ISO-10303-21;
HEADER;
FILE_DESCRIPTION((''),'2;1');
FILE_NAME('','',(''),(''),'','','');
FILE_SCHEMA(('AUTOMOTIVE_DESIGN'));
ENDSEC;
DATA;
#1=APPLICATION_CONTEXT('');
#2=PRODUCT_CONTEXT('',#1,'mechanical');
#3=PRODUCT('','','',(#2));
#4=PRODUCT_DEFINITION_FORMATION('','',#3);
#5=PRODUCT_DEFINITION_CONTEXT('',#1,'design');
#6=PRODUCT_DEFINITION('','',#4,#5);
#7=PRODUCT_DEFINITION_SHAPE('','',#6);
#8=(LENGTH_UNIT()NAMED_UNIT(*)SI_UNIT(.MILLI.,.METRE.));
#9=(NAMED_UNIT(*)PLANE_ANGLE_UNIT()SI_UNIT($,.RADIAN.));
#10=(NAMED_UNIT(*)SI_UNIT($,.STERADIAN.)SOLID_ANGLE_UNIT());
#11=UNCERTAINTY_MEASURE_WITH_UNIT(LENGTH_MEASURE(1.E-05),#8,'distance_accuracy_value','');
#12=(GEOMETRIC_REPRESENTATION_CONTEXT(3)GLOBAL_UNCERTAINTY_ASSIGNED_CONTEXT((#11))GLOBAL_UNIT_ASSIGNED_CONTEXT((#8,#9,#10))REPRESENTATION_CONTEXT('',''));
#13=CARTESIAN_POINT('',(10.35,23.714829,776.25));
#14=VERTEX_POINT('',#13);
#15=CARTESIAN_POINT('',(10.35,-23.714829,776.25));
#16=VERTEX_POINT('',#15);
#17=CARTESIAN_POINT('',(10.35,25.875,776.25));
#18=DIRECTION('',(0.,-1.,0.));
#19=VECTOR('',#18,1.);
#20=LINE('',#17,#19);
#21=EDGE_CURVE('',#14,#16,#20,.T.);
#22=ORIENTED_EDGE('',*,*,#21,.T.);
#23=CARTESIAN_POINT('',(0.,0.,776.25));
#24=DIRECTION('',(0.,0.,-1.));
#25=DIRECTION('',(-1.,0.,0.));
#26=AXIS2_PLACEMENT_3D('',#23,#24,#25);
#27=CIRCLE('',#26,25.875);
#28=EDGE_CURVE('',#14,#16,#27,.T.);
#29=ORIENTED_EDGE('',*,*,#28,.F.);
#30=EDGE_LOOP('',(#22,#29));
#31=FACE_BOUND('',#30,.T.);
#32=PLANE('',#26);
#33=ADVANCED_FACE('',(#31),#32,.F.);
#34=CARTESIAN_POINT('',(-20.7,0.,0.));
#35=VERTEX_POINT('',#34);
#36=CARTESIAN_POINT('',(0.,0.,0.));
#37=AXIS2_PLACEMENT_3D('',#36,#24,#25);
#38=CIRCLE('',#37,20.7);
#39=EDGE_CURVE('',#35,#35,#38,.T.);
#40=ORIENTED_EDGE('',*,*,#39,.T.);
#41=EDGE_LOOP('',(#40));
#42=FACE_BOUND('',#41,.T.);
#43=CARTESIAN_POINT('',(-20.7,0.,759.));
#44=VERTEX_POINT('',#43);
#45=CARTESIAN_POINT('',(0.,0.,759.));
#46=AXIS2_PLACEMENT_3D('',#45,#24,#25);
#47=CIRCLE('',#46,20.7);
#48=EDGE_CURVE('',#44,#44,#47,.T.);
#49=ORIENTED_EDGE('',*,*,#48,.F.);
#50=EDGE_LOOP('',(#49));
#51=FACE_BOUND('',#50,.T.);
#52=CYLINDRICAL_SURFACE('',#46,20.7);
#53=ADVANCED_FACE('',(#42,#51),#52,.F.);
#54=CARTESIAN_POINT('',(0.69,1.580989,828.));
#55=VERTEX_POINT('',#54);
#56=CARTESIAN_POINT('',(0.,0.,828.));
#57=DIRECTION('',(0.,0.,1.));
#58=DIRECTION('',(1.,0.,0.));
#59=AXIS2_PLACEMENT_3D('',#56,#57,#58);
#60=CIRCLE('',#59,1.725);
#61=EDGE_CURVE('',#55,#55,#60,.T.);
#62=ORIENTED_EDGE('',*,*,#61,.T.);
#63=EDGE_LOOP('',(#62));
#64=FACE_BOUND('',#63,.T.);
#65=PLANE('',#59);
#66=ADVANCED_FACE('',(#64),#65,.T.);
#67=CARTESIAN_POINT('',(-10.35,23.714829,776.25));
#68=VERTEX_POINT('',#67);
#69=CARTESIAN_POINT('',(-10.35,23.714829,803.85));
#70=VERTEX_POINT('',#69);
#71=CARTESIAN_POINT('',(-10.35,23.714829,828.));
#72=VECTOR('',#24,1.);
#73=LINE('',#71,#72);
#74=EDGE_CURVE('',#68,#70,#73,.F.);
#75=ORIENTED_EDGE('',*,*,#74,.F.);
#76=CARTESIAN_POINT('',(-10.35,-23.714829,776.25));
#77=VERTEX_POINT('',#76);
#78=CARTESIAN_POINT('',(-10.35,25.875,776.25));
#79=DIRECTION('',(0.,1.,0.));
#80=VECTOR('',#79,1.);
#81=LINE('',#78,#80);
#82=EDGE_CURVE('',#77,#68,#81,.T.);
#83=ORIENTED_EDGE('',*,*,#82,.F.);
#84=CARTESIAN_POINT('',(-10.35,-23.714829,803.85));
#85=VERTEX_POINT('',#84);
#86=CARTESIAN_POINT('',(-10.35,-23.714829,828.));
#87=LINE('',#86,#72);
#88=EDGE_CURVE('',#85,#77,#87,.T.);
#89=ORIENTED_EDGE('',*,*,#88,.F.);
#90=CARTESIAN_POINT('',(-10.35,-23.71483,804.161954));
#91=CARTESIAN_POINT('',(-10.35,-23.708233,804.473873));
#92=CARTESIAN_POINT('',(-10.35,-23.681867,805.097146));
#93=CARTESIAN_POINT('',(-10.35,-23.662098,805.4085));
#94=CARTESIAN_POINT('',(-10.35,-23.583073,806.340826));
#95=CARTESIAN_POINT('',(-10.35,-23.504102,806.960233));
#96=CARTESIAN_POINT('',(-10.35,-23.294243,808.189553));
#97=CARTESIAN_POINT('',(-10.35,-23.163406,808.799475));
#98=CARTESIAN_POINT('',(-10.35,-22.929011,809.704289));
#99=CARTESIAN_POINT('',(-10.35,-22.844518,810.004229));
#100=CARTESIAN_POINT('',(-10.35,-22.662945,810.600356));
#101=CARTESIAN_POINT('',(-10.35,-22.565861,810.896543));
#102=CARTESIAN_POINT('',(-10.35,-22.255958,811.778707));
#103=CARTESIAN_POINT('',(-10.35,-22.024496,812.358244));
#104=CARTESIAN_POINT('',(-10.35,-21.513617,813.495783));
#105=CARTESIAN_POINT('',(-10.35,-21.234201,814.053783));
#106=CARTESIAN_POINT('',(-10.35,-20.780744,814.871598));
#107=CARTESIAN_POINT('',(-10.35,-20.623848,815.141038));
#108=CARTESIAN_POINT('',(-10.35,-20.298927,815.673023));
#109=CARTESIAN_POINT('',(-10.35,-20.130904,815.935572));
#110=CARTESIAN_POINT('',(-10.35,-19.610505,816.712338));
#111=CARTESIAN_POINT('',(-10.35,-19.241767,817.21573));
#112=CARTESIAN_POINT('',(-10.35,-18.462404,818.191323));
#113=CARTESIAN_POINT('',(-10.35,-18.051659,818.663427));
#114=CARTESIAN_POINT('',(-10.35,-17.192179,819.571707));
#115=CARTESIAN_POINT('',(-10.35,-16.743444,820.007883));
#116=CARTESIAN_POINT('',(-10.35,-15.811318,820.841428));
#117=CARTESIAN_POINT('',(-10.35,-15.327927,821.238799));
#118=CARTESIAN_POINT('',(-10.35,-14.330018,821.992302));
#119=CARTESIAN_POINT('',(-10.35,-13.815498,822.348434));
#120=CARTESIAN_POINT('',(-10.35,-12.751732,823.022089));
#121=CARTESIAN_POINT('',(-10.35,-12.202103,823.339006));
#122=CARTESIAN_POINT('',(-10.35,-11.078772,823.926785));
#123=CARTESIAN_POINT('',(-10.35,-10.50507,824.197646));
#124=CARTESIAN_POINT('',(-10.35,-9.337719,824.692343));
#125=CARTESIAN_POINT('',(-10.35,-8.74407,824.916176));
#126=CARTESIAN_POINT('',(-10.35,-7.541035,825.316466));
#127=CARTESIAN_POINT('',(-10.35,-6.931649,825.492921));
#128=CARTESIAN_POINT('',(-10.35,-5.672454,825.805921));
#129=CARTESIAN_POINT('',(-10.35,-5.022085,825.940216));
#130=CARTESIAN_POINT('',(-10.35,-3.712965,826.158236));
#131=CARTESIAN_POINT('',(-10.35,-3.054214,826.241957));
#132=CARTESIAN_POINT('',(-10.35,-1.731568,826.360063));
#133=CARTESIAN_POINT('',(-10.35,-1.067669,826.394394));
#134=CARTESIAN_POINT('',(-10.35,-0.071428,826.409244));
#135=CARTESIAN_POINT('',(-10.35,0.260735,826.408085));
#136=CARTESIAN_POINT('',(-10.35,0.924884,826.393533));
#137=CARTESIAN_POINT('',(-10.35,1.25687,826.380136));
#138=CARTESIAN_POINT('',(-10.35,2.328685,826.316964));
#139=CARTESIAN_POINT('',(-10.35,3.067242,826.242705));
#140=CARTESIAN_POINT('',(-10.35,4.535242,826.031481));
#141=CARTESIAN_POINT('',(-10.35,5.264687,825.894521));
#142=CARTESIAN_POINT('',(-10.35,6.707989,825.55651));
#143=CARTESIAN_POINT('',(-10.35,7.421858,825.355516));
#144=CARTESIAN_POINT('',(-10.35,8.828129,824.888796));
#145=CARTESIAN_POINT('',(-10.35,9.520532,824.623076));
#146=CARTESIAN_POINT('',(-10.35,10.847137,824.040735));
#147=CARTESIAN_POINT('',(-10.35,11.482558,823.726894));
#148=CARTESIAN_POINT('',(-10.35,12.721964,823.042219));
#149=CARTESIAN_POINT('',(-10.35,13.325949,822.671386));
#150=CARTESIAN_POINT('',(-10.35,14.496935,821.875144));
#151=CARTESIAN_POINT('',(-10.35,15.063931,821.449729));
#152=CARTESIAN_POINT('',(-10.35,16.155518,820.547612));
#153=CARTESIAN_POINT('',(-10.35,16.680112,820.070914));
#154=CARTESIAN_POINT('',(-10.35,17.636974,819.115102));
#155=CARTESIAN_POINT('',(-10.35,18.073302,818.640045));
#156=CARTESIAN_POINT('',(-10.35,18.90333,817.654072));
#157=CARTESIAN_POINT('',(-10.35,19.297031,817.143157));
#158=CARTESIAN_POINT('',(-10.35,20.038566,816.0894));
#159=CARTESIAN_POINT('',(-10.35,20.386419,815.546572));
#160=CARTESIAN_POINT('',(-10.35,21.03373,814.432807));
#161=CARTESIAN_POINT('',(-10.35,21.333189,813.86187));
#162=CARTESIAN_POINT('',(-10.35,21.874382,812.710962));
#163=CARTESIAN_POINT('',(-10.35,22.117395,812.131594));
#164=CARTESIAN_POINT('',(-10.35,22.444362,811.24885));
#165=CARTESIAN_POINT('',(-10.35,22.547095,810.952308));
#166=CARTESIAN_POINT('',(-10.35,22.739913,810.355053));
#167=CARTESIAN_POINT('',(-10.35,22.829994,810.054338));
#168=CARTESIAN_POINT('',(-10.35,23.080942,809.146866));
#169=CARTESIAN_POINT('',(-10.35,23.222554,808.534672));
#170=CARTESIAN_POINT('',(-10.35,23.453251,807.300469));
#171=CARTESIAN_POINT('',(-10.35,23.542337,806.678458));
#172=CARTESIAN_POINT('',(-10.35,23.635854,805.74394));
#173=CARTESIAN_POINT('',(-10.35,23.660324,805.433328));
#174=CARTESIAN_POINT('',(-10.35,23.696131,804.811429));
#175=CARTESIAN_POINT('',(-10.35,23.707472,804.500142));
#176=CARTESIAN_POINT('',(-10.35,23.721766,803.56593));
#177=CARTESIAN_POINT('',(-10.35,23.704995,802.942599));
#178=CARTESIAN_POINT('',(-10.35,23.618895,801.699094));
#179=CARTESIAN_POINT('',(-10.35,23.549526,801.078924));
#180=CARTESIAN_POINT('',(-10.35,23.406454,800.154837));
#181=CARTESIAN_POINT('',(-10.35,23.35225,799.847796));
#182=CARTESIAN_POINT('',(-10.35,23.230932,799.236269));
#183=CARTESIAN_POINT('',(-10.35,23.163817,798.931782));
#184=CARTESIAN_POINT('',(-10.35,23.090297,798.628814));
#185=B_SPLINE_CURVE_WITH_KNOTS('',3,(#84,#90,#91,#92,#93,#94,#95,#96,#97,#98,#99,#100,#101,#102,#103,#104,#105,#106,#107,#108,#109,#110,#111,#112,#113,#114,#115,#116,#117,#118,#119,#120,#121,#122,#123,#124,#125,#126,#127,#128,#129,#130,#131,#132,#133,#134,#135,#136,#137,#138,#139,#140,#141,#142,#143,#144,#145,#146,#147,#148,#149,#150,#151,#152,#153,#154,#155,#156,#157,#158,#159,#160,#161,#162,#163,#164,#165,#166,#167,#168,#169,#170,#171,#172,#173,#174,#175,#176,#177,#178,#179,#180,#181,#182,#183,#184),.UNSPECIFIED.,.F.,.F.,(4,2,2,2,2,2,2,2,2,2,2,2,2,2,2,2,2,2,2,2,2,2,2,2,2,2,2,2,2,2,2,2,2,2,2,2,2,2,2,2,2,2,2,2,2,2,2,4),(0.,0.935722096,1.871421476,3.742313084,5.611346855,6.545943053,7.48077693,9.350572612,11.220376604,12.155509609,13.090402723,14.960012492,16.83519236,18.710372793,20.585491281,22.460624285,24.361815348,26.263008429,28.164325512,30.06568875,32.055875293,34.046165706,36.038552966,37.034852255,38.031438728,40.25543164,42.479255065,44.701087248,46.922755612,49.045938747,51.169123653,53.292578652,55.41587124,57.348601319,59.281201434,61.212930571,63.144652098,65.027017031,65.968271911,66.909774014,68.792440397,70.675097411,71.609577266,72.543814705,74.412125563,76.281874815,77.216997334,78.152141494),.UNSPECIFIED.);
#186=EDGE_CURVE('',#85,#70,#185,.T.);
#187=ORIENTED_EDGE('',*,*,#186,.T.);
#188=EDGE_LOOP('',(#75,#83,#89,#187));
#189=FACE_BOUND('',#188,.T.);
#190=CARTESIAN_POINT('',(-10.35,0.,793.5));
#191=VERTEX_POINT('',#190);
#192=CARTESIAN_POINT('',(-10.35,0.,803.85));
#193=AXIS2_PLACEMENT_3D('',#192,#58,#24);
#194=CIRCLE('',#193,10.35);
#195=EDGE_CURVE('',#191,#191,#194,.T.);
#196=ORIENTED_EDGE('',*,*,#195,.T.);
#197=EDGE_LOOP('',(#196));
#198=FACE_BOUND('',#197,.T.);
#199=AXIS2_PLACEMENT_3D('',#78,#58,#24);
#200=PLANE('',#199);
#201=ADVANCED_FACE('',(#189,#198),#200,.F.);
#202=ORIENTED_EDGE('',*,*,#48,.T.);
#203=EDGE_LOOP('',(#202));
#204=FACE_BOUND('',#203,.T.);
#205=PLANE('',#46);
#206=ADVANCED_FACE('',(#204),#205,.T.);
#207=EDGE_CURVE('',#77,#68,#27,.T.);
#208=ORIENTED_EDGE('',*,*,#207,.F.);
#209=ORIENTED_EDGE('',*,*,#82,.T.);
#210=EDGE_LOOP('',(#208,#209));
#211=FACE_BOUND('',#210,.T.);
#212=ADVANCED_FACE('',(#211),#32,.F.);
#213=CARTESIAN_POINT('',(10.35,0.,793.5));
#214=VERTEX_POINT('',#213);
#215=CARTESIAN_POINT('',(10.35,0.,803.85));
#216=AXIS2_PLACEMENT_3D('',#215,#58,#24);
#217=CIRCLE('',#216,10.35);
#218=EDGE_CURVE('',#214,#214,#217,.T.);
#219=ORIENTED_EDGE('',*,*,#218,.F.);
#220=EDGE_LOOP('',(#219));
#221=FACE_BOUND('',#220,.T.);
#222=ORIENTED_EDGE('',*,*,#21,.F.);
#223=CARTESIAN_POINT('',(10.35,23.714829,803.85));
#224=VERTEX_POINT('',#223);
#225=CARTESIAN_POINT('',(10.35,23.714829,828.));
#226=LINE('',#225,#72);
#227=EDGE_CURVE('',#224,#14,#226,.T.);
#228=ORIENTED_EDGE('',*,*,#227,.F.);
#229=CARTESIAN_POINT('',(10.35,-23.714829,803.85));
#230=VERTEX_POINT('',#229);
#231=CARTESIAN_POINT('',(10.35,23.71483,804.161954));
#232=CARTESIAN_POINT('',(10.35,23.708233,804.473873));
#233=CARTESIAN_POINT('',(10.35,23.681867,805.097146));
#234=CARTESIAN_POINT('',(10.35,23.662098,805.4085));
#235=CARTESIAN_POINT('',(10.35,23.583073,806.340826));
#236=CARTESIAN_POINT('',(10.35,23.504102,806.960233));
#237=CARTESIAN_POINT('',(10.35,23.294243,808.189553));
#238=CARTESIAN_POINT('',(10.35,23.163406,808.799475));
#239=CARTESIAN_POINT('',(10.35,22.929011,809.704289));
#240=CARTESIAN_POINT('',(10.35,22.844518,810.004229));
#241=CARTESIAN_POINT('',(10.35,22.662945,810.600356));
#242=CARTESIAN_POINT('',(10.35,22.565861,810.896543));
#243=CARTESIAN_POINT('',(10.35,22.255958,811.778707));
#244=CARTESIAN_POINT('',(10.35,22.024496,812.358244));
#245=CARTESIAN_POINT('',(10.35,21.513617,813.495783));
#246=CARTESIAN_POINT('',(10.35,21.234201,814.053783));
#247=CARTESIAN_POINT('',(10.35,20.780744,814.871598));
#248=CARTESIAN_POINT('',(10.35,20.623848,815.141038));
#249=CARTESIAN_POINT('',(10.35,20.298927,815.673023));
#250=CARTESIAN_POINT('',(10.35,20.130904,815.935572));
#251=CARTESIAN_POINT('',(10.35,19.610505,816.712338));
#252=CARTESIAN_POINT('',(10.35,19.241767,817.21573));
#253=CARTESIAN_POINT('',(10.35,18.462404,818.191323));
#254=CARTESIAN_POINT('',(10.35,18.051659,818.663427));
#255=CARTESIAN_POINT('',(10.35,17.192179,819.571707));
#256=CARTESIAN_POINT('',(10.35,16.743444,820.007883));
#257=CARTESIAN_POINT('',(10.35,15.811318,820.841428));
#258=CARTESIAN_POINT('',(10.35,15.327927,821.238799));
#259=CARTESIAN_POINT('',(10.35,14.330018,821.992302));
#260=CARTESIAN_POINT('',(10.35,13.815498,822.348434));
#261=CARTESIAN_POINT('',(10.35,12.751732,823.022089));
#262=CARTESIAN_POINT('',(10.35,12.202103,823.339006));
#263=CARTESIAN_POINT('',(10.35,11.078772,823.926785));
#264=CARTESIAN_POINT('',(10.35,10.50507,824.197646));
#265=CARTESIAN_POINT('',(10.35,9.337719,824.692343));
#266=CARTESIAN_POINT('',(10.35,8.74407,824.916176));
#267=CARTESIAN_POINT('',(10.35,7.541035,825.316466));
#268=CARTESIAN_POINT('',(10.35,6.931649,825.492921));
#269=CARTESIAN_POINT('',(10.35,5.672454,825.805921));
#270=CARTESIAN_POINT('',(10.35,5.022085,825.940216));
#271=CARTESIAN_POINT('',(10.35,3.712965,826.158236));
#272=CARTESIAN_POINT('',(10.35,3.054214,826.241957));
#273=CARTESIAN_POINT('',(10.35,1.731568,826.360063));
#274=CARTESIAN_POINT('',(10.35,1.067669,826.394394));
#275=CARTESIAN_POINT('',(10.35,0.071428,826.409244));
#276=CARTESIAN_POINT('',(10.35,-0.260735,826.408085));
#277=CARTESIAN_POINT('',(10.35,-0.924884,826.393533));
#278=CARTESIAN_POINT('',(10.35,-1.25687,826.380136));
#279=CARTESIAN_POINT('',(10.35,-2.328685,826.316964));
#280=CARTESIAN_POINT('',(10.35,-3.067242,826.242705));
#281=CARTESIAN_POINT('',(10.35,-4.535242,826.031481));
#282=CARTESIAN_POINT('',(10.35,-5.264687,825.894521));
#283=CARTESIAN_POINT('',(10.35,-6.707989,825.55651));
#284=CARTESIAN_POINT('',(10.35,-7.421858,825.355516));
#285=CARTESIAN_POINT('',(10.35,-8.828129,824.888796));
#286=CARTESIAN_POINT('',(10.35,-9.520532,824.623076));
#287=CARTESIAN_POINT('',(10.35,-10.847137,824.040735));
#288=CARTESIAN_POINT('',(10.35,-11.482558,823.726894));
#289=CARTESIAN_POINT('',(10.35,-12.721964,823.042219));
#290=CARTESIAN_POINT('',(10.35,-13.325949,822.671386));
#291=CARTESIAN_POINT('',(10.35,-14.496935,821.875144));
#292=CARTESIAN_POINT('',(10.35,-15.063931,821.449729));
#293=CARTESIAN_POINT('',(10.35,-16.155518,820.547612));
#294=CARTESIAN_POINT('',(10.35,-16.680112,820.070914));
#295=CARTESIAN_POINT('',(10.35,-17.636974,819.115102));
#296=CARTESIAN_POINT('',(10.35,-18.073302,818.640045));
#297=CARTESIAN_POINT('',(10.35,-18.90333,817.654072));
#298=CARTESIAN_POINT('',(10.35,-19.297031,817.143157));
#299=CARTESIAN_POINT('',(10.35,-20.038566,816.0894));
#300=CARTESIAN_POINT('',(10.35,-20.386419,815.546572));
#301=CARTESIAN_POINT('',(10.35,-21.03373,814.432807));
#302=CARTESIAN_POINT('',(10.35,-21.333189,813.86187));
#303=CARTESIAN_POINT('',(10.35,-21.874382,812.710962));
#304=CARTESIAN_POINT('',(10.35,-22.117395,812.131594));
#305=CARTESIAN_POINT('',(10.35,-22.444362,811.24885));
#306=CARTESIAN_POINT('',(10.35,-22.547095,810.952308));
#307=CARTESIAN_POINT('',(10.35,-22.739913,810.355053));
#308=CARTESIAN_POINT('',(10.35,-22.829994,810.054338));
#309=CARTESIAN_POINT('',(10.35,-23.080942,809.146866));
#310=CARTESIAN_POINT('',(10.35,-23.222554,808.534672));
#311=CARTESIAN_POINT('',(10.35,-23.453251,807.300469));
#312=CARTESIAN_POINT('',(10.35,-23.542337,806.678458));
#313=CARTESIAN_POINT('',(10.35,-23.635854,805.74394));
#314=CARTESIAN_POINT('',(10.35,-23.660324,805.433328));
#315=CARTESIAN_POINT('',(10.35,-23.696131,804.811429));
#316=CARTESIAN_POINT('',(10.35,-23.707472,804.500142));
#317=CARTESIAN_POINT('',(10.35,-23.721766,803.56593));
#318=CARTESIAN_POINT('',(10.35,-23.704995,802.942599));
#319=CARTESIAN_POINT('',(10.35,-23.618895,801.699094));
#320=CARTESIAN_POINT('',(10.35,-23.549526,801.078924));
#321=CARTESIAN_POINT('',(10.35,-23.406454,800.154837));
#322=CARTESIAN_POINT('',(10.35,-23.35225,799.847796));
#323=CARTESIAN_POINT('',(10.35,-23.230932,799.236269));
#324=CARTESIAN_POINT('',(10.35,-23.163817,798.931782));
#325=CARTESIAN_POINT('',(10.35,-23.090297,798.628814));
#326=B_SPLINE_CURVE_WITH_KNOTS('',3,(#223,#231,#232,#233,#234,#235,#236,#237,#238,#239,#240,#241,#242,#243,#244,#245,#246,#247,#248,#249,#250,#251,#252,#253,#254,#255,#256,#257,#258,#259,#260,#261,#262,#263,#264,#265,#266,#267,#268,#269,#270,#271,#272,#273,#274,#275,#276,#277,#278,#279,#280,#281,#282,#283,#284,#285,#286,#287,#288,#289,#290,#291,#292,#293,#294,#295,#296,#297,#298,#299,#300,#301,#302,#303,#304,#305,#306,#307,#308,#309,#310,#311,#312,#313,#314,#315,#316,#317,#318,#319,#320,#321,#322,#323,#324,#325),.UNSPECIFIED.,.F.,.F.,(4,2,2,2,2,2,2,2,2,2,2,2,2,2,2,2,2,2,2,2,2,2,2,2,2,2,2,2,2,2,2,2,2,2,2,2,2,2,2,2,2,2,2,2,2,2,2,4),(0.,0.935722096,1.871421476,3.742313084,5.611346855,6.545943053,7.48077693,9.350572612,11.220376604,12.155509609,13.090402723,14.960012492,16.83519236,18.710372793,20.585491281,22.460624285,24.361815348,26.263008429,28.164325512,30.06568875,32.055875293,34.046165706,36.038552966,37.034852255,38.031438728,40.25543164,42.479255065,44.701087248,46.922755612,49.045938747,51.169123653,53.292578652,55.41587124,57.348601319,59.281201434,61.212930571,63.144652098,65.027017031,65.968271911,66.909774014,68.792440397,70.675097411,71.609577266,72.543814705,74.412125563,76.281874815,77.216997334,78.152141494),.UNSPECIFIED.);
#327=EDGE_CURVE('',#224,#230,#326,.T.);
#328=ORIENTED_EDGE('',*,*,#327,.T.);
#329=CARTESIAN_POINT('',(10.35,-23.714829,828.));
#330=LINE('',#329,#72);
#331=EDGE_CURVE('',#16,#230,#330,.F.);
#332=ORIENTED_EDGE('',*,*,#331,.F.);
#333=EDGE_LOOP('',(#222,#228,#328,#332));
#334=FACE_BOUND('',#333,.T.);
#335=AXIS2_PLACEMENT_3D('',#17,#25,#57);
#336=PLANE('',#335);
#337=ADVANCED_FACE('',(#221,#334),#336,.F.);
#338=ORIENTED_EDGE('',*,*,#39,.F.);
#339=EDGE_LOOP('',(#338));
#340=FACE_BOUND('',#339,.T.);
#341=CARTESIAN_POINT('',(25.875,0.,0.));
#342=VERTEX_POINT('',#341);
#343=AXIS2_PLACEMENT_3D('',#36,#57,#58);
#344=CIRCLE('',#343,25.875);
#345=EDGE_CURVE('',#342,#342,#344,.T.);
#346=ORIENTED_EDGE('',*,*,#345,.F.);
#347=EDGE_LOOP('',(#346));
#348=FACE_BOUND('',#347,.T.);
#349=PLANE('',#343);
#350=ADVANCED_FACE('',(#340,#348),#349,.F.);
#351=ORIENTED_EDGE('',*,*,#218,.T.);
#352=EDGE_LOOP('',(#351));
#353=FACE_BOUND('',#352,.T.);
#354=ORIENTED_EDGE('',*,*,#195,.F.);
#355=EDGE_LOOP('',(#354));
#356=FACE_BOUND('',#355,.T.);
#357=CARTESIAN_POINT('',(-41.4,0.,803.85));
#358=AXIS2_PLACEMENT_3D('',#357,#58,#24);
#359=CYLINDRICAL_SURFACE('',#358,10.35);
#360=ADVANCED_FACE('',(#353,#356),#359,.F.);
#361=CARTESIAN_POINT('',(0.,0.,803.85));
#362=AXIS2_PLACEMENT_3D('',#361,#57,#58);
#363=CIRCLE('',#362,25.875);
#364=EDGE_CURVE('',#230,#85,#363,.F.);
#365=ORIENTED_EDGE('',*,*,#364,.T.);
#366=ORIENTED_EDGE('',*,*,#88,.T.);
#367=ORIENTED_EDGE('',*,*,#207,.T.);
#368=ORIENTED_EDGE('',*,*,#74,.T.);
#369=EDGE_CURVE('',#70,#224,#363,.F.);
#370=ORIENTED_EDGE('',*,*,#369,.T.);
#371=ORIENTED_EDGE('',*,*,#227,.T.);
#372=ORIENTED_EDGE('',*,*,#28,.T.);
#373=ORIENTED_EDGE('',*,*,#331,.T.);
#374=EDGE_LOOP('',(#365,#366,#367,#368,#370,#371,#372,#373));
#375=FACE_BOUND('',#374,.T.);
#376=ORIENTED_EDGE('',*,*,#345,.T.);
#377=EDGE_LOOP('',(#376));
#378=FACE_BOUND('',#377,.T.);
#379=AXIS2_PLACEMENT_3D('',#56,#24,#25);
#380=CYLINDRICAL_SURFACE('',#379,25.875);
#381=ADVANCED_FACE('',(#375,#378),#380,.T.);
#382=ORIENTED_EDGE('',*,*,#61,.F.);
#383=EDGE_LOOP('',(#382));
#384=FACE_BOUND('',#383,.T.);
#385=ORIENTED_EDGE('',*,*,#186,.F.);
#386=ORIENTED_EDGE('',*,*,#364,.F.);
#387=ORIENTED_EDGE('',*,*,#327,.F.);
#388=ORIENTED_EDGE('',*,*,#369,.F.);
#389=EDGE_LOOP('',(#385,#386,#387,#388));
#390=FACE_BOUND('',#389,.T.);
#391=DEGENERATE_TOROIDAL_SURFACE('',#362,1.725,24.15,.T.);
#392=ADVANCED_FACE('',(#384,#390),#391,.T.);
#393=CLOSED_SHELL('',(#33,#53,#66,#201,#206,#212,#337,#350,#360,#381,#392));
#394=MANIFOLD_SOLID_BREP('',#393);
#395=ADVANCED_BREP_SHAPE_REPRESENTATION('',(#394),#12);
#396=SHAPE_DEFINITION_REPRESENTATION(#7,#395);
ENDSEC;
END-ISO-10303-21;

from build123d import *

# Parameters (mm, degrees)
SKETCH_1_R          = 75
EXTRUDE_1_DEPTH     = 2400
CUT_EXTRUDE_1_DEPTH = 150
SKETCH_3_R          = 30
CUT_EXTRUDE_2_DEPTH = 150
FILLET_1_R          = 70
SKETCH_4_R          = 60
CUT_EXTRUDE_4_DEPTH = 2200
SCALE_1_SCALE       = 0.345


with BuildPart() as part:
    # 草图1 → 凸台-拉伸1 (new body)
    with BuildSketch(Plane.XY):
        Circle(SKETCH_1_R)
    extrude(amount=EXTRUDE_1_DEPTH)

    # 草图2 → 切除-拉伸1 (cut)
    with BuildSketch(Plane.XY.offset(2400)):
        Polygon((-30, 75), (-30, -75), (-133.073279379, -42.369308492), (-77.396642949, 65.414797111), align=None)
        Polygon((30, 75), (30, -75), (106.458623503, -47.875789018), (106.458623503, 55.829594222), align=None)
    extrude(amount=-CUT_EXTRUDE_1_DEPTH, mode=Mode.SUBTRACT)

    # 草图3 → 切除-拉伸2 (cut)
    with BuildSketch(Plane(origin=(30, 0, 0), x_dir=(0, 0, -1), z_dir=(1, 0, 0))):
        with Locations((-2330, 0)):
            Circle(SKETCH_3_R)
    extrude(amount=-CUT_EXTRUDE_2_DEPTH, mode=Mode.SUBTRACT)

    # 圆角1
    # the kernel refuses this fillet: 70 mm, written as the material it takes off along each edge
    with BuildSketch(Plane(origin=(0, 0, 2400), x_dir=(0.3861785994276561, -0.922424029036589, 0), z_dir=(-0.922424029036589, -0.3861785994276561, 0))) as fillet_1_piece_1:
        with BuildLine():
            CenterArc((75 - FILLET_1_R, -FILLET_1_R), FILLET_1_R, 0, 90)
            Line((75 - FILLET_1_R, 0), (75, 0))
            Line((75, 0), (75, -FILLET_1_R))
        make_face()
    revolve(axis=Axis((0, 0, 2400), (0, 0, 1)), revolution_arc=314.566142673, mode=Mode.SUBTRACT)
    with BuildSketch(Plane(origin=(0, 0, 2400), x_dir=(-0.386178599427656, 0.922424029036589, 0), z_dir=(0.922424029036589, 0.386178599427656, 0))) as fillet_1_piece_2:
        with BuildLine():
            CenterArc((75 - FILLET_1_R, -FILLET_1_R), FILLET_1_R, 0, 90)
            Line((75 - FILLET_1_R, 0), (75, 0))
            Line((75, 0), (75, -FILLET_1_R))
        make_face()
    revolve(axis=Axis((0, 0, 2400), (0, 0, 1)), revolution_arc=314.566142673, mode=Mode.SUBTRACT)

    # 草图4 → 切除-拉伸4 (cut)
    with BuildSketch(Plane(origin=(0, 0, 0), x_dir=(-1, 0, 0), z_dir=(0, 0, -1))):
        Circle(SKETCH_4_R)
    extrude(amount=-CUT_EXTRUDE_4_DEPTH, mode=Mode.SUBTRACT)


with BuildPart() as part_1:
    # 缩放比例1: scaled about (0, 0, 0)
    add(part.part.scale(SCALE_1_SCALE))


solid = part_1.part
